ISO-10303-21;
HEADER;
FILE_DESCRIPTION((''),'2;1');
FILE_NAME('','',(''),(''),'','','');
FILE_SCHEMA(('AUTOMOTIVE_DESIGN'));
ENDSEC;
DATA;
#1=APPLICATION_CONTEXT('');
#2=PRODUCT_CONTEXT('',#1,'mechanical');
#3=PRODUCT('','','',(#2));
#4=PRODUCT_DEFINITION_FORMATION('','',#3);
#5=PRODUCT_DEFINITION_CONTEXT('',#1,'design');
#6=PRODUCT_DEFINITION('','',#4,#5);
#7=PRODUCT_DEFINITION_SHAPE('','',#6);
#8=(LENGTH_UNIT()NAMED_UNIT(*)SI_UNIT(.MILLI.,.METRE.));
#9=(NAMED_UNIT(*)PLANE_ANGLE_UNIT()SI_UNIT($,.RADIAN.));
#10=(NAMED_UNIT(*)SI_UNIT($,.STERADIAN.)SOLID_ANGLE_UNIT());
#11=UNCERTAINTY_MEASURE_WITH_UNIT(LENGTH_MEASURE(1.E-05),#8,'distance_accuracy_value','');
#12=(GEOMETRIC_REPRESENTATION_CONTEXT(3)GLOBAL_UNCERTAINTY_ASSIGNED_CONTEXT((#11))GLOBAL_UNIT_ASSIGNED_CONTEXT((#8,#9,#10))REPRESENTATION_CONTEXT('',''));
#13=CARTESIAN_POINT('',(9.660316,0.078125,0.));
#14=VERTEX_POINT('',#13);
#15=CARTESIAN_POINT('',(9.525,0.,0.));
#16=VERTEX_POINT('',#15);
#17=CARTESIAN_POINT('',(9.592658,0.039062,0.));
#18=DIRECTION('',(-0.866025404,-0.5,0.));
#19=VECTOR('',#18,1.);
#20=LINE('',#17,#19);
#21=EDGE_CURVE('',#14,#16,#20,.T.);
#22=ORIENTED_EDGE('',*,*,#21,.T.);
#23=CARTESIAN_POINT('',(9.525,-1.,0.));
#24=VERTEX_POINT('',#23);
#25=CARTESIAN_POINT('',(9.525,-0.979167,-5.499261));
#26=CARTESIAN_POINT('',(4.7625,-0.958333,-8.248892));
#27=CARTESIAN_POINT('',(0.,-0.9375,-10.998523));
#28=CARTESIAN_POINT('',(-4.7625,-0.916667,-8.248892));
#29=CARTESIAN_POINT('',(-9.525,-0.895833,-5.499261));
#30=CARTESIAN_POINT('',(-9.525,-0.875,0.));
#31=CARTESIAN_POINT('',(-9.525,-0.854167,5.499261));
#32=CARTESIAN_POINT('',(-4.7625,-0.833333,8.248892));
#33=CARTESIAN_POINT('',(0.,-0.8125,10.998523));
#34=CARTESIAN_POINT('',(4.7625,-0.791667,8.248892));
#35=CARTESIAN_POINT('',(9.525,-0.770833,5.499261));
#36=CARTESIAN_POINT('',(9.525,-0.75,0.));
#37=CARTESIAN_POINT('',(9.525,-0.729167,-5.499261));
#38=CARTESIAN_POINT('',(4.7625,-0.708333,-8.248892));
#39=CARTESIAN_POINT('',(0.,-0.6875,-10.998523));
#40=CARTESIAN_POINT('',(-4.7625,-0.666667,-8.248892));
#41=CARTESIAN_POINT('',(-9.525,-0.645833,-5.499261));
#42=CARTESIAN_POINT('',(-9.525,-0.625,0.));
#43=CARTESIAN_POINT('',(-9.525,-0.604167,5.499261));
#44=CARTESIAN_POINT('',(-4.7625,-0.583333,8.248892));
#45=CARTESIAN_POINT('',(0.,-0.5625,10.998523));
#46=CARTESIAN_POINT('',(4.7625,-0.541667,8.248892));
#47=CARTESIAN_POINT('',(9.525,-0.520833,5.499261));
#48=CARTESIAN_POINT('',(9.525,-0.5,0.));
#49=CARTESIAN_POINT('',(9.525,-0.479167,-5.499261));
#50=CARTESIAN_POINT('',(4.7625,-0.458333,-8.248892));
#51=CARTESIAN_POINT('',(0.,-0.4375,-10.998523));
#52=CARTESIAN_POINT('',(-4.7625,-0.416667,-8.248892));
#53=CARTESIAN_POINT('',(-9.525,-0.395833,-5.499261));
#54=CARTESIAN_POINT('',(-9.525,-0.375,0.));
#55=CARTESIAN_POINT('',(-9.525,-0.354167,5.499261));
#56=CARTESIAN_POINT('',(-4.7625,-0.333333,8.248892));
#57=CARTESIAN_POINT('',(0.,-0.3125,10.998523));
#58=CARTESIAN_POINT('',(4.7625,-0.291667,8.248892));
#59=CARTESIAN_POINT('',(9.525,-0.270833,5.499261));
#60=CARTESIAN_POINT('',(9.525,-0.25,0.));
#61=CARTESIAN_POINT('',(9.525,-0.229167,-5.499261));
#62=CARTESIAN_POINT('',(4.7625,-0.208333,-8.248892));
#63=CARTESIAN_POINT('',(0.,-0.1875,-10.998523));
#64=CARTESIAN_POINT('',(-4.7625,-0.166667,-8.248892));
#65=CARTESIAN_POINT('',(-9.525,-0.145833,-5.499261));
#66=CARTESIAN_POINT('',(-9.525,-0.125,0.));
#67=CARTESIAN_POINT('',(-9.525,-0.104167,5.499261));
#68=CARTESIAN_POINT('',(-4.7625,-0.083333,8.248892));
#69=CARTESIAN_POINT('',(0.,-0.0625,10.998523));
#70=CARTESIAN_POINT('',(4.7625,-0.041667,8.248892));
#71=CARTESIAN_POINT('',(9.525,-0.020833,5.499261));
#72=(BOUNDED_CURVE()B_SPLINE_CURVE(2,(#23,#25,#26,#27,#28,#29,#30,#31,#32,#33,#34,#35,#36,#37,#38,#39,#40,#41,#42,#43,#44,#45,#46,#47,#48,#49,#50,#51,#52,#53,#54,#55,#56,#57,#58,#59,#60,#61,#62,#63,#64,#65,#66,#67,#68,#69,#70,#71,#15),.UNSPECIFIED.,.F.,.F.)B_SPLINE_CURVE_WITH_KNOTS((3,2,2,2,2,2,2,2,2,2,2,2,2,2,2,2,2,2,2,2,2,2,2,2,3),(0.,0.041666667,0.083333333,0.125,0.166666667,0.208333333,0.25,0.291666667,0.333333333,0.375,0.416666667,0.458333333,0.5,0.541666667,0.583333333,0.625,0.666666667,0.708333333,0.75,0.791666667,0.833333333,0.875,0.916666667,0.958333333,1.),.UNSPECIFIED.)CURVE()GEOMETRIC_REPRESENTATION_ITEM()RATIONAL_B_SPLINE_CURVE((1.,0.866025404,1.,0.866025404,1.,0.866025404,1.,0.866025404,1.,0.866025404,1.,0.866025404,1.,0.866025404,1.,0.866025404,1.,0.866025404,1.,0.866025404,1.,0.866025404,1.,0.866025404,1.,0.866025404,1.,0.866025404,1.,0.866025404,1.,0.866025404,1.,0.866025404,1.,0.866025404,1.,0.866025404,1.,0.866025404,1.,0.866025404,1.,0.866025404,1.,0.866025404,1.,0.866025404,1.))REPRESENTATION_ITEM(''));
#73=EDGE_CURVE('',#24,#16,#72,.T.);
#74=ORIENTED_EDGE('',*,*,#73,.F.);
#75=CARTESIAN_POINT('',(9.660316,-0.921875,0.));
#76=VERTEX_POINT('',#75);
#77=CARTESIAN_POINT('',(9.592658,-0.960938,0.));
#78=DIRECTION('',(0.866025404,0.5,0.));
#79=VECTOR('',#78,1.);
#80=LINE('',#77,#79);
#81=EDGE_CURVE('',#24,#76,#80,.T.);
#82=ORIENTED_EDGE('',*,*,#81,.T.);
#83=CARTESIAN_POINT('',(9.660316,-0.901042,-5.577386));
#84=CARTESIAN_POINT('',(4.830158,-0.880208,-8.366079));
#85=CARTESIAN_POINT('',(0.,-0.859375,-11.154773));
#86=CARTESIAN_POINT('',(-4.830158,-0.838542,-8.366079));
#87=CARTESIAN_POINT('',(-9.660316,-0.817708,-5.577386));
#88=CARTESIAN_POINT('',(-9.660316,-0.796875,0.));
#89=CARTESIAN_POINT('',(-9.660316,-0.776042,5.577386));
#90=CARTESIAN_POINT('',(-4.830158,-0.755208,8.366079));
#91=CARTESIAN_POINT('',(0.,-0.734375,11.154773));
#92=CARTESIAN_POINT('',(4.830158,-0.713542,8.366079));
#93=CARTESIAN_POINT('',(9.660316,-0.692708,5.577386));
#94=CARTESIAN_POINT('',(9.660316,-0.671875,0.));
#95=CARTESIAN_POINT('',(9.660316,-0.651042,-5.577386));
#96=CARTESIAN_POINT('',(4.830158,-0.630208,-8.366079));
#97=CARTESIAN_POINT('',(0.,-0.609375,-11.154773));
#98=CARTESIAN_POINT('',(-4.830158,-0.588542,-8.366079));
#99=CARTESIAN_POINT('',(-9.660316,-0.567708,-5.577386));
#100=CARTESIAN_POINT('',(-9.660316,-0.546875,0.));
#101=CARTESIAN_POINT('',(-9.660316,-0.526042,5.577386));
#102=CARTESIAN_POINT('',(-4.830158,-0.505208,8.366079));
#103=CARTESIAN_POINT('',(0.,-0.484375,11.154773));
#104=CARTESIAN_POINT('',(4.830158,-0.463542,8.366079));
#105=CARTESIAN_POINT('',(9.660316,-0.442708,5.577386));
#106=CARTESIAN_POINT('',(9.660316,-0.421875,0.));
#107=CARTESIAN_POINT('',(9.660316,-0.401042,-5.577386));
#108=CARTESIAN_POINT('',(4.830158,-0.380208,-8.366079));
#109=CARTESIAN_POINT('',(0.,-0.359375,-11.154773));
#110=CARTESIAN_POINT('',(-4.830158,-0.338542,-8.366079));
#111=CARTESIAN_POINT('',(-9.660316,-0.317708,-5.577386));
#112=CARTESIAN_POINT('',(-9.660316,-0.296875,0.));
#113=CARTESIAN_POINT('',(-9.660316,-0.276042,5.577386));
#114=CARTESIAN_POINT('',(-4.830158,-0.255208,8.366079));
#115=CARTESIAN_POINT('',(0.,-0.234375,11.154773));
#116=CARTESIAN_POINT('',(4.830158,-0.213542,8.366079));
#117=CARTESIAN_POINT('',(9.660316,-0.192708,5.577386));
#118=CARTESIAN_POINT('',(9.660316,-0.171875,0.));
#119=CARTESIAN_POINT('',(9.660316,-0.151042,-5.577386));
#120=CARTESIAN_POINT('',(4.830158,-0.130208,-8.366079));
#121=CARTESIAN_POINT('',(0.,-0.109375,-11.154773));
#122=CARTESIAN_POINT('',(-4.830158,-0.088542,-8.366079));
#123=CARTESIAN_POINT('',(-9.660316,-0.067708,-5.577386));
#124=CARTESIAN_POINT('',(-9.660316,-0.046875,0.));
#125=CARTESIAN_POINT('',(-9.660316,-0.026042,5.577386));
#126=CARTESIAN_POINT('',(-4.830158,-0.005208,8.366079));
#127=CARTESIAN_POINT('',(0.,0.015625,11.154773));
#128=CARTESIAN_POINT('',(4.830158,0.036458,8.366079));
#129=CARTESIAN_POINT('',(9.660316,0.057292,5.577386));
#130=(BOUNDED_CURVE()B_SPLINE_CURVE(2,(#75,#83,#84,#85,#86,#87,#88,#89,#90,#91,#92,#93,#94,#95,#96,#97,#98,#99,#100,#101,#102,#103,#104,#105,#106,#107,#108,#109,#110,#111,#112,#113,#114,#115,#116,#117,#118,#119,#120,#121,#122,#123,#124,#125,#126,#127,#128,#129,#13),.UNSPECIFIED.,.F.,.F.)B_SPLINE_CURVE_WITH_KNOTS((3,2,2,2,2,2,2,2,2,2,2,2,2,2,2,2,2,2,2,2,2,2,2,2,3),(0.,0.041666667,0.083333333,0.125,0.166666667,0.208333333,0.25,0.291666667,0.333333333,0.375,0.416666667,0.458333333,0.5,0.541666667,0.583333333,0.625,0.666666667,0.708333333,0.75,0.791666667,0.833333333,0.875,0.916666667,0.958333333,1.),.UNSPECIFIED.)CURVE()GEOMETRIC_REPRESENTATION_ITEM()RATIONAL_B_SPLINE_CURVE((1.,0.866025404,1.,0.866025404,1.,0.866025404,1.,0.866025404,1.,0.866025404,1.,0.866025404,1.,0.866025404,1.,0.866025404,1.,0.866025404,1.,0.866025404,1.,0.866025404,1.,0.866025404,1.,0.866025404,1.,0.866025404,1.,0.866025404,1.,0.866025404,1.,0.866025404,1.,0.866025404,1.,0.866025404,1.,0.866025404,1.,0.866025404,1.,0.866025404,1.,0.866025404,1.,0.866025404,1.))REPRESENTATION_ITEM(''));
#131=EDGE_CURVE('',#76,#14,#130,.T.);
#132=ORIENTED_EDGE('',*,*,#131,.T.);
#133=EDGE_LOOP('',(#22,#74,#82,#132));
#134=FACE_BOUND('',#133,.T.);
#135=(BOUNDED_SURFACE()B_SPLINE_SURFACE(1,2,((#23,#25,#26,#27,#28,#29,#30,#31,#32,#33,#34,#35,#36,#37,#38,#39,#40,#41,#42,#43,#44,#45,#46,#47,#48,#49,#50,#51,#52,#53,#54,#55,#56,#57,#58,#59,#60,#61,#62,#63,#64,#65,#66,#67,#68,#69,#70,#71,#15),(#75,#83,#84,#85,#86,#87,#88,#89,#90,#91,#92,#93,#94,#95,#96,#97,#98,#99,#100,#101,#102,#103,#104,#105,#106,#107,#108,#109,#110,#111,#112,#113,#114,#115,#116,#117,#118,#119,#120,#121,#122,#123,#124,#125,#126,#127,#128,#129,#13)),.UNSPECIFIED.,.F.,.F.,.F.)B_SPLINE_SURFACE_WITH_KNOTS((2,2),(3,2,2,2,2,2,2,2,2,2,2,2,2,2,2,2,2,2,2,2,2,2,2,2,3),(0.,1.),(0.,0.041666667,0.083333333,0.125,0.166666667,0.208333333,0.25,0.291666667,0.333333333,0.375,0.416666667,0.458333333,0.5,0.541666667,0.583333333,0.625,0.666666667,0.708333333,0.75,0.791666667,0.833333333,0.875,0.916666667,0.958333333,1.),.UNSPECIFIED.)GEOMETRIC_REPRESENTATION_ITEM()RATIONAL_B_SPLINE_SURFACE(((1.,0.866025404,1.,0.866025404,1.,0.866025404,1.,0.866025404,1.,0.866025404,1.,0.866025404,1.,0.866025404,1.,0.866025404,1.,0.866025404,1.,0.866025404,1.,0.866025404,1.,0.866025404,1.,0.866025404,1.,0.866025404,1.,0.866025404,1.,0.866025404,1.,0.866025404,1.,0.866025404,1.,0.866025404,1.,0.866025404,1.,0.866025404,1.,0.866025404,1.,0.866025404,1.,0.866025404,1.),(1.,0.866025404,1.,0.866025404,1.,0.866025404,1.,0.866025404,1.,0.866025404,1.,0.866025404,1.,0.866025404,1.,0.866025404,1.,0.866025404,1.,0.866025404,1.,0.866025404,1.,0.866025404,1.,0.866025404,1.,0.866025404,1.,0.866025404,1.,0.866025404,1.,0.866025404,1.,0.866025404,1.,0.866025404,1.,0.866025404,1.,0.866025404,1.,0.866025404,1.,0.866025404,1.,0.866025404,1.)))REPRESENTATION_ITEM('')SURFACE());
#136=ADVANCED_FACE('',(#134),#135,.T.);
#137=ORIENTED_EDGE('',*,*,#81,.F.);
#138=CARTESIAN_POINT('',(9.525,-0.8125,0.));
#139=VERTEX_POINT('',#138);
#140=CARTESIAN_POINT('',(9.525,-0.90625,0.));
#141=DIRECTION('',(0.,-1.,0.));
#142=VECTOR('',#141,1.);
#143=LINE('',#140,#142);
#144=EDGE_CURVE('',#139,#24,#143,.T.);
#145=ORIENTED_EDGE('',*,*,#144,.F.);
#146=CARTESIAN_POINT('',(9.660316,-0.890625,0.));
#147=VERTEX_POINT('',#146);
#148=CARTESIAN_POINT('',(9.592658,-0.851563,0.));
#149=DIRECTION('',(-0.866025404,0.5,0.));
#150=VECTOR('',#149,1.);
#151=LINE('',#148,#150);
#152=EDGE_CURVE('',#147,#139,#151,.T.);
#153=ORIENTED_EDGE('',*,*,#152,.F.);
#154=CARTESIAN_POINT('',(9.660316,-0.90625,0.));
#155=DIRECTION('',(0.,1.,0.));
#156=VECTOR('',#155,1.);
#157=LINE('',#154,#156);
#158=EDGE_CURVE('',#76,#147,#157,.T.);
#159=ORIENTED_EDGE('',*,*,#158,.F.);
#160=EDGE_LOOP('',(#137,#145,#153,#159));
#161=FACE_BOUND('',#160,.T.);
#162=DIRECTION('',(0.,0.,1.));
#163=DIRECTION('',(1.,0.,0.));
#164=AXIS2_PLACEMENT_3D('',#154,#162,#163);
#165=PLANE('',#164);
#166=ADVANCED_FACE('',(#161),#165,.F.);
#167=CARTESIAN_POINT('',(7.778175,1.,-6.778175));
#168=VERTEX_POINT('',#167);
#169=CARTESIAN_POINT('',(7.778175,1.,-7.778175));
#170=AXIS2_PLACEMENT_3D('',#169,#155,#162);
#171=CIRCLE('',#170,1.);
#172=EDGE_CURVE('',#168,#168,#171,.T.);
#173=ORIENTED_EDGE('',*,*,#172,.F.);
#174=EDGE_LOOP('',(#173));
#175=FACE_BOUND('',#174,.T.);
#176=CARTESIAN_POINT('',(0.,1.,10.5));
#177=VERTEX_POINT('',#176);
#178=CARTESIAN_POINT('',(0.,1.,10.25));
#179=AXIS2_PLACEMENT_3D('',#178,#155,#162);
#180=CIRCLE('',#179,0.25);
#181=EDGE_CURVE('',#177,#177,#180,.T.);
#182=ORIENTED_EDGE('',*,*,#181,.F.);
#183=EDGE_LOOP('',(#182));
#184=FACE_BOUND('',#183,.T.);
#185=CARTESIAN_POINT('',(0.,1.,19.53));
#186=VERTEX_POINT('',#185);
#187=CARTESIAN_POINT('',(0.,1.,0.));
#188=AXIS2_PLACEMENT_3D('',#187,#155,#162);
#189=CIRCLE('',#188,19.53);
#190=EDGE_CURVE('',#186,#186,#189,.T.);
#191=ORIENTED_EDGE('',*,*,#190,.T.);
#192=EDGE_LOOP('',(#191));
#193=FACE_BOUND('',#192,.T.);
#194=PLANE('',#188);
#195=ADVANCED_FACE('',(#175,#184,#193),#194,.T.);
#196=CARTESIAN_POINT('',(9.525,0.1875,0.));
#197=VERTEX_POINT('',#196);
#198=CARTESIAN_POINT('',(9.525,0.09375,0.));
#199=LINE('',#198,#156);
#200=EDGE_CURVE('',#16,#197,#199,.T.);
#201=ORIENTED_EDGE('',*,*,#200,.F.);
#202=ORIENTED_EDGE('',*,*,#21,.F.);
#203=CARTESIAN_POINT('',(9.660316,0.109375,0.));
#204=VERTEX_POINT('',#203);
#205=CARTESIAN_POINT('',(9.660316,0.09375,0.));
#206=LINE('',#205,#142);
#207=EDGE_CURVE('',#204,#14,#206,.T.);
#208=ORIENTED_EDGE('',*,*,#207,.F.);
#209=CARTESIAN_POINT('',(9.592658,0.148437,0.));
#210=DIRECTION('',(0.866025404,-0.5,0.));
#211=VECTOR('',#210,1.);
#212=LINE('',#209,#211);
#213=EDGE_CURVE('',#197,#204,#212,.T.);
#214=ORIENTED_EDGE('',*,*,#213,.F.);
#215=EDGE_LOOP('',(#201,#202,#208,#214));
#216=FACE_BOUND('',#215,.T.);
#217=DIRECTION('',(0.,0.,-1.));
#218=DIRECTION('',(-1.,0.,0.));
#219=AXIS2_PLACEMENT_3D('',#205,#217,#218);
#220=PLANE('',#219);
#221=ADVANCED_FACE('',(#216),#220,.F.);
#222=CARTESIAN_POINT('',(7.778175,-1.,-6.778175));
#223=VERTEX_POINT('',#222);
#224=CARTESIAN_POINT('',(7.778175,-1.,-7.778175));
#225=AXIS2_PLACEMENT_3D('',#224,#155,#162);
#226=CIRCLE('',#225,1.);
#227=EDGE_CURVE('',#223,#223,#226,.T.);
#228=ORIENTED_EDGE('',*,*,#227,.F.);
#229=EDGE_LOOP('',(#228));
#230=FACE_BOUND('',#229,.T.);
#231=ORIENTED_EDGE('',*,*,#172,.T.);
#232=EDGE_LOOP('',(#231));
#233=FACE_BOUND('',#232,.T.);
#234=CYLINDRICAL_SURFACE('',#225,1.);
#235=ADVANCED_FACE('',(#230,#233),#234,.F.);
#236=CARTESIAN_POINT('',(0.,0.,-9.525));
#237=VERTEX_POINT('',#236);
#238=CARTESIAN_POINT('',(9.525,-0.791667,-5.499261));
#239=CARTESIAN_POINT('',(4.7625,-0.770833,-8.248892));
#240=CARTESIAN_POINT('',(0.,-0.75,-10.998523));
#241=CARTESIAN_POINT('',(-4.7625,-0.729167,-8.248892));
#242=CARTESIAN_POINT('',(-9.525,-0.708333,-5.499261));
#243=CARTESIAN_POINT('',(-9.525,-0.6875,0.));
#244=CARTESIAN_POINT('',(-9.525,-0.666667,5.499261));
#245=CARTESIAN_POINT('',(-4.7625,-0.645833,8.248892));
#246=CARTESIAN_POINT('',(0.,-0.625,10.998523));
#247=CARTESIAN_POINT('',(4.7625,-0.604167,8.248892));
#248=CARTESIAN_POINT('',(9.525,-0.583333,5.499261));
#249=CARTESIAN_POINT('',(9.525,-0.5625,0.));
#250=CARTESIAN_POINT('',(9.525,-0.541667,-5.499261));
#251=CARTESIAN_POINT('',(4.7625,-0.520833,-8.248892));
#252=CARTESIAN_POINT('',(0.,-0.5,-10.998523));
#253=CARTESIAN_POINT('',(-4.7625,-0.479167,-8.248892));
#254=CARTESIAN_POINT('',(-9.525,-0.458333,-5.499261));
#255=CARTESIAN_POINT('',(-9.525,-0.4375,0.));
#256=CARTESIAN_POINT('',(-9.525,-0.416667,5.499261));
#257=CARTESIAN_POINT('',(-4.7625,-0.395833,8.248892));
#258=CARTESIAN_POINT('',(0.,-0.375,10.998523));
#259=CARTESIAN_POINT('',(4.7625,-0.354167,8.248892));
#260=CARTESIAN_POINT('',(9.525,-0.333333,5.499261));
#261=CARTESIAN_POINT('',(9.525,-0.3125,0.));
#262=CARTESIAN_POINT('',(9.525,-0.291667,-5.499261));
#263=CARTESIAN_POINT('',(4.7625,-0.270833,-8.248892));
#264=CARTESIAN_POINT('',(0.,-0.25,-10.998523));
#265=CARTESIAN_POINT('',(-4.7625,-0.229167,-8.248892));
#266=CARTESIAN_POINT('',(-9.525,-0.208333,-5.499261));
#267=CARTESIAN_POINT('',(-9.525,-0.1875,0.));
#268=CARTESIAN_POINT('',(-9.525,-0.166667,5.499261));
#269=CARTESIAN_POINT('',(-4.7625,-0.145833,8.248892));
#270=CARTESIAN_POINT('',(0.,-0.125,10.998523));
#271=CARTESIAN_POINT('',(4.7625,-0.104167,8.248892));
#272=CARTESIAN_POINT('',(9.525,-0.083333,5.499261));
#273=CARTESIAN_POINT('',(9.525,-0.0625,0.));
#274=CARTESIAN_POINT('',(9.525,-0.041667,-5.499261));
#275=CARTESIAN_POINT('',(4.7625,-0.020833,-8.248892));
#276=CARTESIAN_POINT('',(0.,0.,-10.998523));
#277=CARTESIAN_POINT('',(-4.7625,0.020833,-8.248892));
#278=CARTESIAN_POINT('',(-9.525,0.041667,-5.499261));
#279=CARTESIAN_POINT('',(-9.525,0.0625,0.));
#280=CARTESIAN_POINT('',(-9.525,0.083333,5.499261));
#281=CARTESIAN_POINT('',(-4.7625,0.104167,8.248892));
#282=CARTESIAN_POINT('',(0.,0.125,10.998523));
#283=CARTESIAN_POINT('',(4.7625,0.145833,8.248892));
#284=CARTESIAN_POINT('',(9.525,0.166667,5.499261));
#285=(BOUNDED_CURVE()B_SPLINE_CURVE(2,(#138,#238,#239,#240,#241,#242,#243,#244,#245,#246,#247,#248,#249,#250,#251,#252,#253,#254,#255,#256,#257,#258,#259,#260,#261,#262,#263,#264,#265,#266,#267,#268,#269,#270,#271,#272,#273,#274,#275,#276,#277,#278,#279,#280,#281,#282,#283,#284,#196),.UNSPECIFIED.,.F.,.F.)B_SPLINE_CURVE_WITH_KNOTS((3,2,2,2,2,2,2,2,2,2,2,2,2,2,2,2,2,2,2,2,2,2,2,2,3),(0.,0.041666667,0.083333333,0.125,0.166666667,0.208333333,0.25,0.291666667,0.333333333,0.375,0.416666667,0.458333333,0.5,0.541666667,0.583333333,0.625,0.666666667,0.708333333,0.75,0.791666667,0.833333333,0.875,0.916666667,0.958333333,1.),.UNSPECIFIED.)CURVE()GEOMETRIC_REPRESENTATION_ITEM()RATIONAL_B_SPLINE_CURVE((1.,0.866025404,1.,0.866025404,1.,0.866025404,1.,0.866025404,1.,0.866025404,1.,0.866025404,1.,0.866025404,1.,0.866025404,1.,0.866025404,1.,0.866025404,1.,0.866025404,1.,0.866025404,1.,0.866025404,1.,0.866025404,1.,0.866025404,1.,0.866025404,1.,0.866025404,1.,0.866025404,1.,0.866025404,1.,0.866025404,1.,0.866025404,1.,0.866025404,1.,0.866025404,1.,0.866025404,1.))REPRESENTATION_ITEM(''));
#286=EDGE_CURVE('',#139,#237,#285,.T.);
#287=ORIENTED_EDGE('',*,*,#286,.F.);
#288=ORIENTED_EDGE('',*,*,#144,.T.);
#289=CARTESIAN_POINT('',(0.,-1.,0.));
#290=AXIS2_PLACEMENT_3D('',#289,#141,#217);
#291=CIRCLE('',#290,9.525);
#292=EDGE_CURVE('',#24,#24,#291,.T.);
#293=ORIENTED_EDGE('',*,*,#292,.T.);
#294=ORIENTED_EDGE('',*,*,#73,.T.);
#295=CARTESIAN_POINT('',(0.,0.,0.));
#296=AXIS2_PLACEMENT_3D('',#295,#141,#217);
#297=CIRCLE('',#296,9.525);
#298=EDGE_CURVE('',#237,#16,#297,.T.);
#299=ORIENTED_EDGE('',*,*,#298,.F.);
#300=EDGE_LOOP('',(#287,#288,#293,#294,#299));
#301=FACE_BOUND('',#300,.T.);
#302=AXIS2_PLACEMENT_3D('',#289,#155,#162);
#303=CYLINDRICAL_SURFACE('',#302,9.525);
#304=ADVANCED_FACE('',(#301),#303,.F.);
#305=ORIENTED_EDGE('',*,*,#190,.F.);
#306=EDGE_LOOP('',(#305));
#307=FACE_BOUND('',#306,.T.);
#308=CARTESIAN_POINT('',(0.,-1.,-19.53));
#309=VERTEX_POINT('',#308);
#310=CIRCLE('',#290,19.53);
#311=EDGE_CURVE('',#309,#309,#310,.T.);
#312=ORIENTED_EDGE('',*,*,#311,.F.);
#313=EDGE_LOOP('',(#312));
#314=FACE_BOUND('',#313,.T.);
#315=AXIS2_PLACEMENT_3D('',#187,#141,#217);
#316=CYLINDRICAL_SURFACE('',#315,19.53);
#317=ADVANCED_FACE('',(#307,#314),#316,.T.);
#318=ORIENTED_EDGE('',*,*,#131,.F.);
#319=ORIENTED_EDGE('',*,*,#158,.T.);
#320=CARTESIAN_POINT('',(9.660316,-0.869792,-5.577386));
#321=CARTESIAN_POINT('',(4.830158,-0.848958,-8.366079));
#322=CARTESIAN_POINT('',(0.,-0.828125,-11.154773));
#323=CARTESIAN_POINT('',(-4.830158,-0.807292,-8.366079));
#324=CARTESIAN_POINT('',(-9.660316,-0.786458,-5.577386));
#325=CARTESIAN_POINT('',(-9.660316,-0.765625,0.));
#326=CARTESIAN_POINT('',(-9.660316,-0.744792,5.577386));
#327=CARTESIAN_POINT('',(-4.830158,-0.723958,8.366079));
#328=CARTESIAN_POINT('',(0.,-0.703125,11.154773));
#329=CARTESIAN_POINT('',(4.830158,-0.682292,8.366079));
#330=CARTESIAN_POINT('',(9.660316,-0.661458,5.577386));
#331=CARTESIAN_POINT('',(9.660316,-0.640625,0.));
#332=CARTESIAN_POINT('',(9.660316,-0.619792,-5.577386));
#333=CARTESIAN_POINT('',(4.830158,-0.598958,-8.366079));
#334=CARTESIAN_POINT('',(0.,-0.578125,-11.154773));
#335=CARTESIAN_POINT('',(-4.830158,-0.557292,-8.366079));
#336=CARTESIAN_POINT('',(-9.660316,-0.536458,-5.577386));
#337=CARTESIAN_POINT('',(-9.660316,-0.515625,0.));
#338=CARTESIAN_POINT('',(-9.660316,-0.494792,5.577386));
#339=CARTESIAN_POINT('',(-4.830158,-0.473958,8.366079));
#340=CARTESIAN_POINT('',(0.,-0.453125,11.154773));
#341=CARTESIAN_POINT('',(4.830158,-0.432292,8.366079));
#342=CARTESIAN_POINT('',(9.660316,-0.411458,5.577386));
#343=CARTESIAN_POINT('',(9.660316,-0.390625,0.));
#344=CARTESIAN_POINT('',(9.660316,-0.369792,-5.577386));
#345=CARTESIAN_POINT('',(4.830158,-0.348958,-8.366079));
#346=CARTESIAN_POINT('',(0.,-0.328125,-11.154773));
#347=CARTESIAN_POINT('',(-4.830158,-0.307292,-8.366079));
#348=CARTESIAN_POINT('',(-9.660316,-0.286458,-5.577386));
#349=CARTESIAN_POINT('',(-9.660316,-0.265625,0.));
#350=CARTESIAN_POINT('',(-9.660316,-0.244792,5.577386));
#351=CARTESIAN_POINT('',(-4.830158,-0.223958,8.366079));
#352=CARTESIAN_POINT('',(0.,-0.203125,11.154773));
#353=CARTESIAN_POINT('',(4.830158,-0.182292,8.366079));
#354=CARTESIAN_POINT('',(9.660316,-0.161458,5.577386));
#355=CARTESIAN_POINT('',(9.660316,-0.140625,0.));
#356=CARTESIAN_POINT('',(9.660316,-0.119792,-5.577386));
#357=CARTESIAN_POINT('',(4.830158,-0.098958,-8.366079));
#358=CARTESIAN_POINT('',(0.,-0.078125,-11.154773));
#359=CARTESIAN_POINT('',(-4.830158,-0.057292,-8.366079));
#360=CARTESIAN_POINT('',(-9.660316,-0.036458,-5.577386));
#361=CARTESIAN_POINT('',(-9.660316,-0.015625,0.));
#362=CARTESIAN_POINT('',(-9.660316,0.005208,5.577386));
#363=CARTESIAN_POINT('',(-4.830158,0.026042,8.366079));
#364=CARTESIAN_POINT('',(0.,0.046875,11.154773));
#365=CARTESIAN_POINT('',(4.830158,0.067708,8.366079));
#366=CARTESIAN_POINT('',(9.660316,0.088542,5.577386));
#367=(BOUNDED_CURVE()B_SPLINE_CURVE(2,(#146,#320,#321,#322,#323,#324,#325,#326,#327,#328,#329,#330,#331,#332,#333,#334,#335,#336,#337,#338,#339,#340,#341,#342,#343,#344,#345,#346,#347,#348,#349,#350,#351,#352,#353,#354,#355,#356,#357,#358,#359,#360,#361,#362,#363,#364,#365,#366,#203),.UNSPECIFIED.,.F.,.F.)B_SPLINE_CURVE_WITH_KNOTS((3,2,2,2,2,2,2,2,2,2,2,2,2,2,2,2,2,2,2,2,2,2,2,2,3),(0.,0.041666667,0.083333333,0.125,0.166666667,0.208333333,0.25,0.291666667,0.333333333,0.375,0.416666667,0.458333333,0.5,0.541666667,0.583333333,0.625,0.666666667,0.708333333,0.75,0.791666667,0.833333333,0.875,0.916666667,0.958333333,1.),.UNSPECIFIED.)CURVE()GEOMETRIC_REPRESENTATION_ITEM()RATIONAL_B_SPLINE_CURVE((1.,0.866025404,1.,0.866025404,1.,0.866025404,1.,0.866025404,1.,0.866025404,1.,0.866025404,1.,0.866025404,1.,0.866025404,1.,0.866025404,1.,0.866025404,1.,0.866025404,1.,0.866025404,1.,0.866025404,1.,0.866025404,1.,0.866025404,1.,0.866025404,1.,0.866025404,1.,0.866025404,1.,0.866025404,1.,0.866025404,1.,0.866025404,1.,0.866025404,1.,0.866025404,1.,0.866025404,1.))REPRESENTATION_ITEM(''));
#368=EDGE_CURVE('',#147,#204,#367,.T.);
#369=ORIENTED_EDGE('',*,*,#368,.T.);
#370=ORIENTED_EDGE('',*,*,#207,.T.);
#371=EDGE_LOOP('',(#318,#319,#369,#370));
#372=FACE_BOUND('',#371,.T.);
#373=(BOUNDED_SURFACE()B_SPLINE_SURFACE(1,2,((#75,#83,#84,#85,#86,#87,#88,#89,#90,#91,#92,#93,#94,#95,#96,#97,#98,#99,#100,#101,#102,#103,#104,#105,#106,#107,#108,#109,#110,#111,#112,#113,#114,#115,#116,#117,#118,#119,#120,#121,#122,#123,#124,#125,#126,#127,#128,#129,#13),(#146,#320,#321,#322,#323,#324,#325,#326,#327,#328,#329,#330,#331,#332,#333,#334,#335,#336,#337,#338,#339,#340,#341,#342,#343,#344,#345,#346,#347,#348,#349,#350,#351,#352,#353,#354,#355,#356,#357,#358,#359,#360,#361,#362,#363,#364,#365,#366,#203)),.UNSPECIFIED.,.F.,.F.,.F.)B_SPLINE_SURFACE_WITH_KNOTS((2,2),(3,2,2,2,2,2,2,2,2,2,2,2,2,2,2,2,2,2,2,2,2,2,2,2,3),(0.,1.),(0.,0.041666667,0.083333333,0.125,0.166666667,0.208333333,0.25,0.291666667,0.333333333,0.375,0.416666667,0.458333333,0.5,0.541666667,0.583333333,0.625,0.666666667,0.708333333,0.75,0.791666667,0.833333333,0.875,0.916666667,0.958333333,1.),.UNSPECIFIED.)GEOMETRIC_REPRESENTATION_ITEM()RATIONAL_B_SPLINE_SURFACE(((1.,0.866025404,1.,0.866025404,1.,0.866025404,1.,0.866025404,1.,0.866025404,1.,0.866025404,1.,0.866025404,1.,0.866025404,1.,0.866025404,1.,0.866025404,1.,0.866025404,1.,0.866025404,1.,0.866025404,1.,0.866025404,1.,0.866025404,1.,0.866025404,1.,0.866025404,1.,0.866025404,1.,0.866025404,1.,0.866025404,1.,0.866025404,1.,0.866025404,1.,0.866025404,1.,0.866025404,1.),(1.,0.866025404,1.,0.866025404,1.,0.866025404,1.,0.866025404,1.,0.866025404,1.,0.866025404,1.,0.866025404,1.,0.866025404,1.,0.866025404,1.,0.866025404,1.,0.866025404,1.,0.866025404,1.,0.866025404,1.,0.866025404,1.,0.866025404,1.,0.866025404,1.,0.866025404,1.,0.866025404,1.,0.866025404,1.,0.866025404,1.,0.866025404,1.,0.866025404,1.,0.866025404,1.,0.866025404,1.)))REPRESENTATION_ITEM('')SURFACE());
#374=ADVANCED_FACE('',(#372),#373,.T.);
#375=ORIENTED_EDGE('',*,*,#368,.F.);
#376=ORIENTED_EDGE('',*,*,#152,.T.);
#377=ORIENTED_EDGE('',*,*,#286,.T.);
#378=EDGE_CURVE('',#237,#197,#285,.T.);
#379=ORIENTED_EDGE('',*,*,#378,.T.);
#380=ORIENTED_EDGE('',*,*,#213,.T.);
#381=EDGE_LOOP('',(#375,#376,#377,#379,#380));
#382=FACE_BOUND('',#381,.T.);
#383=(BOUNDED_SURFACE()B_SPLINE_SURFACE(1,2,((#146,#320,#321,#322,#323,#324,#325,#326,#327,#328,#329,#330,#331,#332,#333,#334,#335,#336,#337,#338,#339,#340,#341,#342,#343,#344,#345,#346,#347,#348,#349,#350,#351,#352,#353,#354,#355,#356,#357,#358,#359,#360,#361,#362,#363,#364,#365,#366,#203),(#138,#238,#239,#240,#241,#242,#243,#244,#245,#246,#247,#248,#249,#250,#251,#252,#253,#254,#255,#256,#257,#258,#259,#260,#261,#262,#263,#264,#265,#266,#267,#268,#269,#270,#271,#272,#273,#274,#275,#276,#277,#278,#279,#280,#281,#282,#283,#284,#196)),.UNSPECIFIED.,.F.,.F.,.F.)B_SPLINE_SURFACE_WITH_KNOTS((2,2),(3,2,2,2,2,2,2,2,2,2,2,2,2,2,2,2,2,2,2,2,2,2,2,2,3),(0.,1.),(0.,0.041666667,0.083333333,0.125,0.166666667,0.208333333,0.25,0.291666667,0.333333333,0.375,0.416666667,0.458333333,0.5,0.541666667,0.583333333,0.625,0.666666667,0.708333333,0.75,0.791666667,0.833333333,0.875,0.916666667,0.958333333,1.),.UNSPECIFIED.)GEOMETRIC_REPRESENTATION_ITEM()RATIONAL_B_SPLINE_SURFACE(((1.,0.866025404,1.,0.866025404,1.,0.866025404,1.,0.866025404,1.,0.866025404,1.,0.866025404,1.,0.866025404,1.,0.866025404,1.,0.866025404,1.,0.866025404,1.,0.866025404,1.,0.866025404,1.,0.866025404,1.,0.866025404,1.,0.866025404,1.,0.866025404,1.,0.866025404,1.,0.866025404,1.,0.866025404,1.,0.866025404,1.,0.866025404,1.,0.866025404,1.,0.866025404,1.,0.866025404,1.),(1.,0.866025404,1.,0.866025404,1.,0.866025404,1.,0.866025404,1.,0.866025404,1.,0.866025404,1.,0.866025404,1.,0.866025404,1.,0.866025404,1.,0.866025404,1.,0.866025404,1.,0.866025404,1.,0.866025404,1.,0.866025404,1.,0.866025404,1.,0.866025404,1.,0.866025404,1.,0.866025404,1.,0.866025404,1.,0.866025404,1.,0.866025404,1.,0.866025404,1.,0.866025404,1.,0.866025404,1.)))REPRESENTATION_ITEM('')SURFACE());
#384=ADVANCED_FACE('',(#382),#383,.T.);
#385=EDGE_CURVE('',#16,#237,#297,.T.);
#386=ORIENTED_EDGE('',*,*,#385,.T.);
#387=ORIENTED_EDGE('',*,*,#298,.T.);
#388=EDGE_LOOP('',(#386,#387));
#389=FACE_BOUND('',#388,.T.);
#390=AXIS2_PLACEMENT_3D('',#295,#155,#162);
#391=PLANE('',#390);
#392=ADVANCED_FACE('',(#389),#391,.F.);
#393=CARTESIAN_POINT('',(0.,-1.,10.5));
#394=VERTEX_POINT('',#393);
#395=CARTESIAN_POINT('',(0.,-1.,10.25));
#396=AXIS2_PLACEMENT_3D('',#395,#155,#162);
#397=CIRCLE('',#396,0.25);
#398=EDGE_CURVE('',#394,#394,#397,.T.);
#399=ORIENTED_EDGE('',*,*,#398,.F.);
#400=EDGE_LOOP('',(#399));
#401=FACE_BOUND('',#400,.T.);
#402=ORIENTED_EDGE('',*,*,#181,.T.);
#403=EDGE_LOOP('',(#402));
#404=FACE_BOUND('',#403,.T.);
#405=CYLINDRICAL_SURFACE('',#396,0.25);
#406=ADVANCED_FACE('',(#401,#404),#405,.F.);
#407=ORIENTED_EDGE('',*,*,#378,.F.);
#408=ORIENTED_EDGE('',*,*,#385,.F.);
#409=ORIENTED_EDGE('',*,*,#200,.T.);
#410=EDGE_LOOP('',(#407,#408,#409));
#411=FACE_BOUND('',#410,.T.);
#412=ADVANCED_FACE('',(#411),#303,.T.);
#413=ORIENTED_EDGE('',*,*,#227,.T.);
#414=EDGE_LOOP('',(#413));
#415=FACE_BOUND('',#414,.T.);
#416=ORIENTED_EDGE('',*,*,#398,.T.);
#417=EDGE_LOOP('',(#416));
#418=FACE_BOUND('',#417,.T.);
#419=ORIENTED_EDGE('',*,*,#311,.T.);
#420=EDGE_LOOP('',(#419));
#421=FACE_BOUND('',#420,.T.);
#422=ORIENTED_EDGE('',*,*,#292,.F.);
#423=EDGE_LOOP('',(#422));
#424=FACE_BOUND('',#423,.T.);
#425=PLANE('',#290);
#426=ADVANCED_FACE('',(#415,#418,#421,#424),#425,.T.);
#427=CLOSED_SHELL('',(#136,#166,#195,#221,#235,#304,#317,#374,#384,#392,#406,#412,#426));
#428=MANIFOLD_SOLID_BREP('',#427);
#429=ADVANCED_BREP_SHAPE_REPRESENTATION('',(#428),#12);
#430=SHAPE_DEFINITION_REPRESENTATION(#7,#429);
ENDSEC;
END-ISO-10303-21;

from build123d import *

# Parameters (mm, degrees)
SKETCH1_R               = 19.53
BOSS_EXTRUDE1_DEPTH     = 1
BOSS_EXTRUDE3_START     = 1
SKETCH6_R               = 19.53
SKETCH6_R_2             = 9.525
BOSS_EXTRUDE3_DEPTH     = 1
THREAD1_PITCH           = 0.25
CUT_EXTRUDE1_DEPTH      = 28.691908616
CUT_EXTRUDE1_DEPTH_BACK = 28.691908616
SKETCH7_R               = 0.25
CUT_EXTRUDE2_DEPTH      = 28.691908616
CUT_EXTRUDE2_DEPTH_BACK = 28.691908616
SKETCH8_R               = 1


with BuildPart() as part:
    # Sketch1 → Boss-Extrude1 (new body)
    with BuildSketch(Plane(origin=(0, 0, 0), x_dir=(1, 0, 0), z_dir=(0, 1, 0))):
        with Locations(Location((0, 0, 0), (0, 0, 270))):
            Circle(SKETCH1_R)
    extrude(amount=BOSS_EXTRUDE1_DEPTH)

    # Sketch6 → Boss-Extrude3 (add)
    with BuildSketch(Plane.XZ.offset(BOSS_EXTRUDE3_START)):
        with Locations(Location((0, 0, 0), (0, 0, 270))):
            Circle(SKETCH6_R)
        with Locations(Location((0, 0, 0), (0, 0, 270))):
            Circle(SKETCH6_R_2, mode=Mode.SUBTRACT)
    extrude(amount=-BOSS_EXTRUDE3_DEPTH)

    # Thread1: the profile of Thread Profile1 profile screwed along a right-hand helix of 4 turns, 6 arcs to a turn; built about Z, then put on its axis
    thread1_z = Axis((0, 0, 0), (0, 0, 1))
    thread1_corners = [(9.5247, 0, -0.000173205), (9.660316469, 0, 0.078125), (9.660316469, 0, 0.109375), (9.5247, 0, 0.187673204)]
    with BuildLine(mode=Mode.PRIVATE) as thread1_profile:
        Line(thread1_corners[0], thread1_corners[1])
        Line(thread1_corners[1], thread1_corners[2])
        Line(thread1_corners[2], thread1_corners[3])
        Line(thread1_corners[3], thread1_corners[0])
    thread1_cap = Face(thread1_profile.wire())
    thread1_turn_angles = [0, 30, 60, 90, 120, 150, 180, 210, 240, 270, 300, 330, 360]
    thread1_turn_weights = [1, 0.8660254037844387, 1, 0.8660254037844387, 1, 0.8660254037844387, 1, 0.8660254037844387, 1, 0.8660254037844387, 1, 0.8660254037844387, 1]
    thread1_turn_rails = [Edge.make_bspline([Vector(p[0], p[1], 0).rotate(thread1_z, thread1_turn_angles[k]) / thread1_turn_weights[k] + Vector(0, 0, p[2] + THREAD1_PITCH * thread1_turn_angles[k] / 360) for k in range(13)], [0, 0, 0, 1, 1, 2, 2, 3, 3, 4, 4, 5, 5, 6, 6, 6], 2, thread1_turn_weights) for p in thread1_corners]
    thread1_turn_sides = [Face.make_surface_from_curves(thread1_turn_rails[p[0]], thread1_turn_rails[p[1]]) for p in [(0, 1), (1, 2), (2, 3), (3, 0)]]
    thread1 = Plane(origin=(0, -1, 0), x_dir=(1, 0, 0), z_dir=(0, 1, 0)) * Solid(Shell([*[p.moved(Location((0, 0, THREAD1_PITCH * i))) for i in range(4) for p in thread1_turn_sides], thread1_cap, thread1_cap.rotate(thread1_z, 1440).moved(Location((0, 0, THREAD1_PITCH * 1440 / 360)))]))
    add(thread1, mode=Mode.SUBTRACT)

    # Sketch7 → Cut-Extrude1 (cut, two sides: drawn at the far end of the back side and taken through both)
    with BuildSketch(Plane(origin=(0, 1, 0), x_dir=(1, 0, 0), z_dir=(0, 1, 0)).offset(-CUT_EXTRUDE1_DEPTH_BACK)):
        with Locations(Location((0, -10.25, 0), (0, 0, 270))):
            Circle(SKETCH7_R)
    extrude(amount=CUT_EXTRUDE1_DEPTH + CUT_EXTRUDE1_DEPTH_BACK, mode=Mode.SUBTRACT)

    # Sketch8 → Cut-Extrude2 (cut, two sides: drawn at the far end of the back side and taken through both)
    with BuildSketch(Plane(origin=(0, 1, 0), x_dir=(1, 0, 0), z_dir=(0, 1, 0)).offset(-CUT_EXTRUDE2_DEPTH_BACK)):
        with Locations(Location((7.778174593, 7.778174593, 0), (0, 0, 270))):
            Circle(SKETCH8_R)
    extrude(amount=CUT_EXTRUDE2_DEPTH + CUT_EXTRUDE2_DEPTH_BACK, mode=Mode.SUBTRACT)


solid = part.part
